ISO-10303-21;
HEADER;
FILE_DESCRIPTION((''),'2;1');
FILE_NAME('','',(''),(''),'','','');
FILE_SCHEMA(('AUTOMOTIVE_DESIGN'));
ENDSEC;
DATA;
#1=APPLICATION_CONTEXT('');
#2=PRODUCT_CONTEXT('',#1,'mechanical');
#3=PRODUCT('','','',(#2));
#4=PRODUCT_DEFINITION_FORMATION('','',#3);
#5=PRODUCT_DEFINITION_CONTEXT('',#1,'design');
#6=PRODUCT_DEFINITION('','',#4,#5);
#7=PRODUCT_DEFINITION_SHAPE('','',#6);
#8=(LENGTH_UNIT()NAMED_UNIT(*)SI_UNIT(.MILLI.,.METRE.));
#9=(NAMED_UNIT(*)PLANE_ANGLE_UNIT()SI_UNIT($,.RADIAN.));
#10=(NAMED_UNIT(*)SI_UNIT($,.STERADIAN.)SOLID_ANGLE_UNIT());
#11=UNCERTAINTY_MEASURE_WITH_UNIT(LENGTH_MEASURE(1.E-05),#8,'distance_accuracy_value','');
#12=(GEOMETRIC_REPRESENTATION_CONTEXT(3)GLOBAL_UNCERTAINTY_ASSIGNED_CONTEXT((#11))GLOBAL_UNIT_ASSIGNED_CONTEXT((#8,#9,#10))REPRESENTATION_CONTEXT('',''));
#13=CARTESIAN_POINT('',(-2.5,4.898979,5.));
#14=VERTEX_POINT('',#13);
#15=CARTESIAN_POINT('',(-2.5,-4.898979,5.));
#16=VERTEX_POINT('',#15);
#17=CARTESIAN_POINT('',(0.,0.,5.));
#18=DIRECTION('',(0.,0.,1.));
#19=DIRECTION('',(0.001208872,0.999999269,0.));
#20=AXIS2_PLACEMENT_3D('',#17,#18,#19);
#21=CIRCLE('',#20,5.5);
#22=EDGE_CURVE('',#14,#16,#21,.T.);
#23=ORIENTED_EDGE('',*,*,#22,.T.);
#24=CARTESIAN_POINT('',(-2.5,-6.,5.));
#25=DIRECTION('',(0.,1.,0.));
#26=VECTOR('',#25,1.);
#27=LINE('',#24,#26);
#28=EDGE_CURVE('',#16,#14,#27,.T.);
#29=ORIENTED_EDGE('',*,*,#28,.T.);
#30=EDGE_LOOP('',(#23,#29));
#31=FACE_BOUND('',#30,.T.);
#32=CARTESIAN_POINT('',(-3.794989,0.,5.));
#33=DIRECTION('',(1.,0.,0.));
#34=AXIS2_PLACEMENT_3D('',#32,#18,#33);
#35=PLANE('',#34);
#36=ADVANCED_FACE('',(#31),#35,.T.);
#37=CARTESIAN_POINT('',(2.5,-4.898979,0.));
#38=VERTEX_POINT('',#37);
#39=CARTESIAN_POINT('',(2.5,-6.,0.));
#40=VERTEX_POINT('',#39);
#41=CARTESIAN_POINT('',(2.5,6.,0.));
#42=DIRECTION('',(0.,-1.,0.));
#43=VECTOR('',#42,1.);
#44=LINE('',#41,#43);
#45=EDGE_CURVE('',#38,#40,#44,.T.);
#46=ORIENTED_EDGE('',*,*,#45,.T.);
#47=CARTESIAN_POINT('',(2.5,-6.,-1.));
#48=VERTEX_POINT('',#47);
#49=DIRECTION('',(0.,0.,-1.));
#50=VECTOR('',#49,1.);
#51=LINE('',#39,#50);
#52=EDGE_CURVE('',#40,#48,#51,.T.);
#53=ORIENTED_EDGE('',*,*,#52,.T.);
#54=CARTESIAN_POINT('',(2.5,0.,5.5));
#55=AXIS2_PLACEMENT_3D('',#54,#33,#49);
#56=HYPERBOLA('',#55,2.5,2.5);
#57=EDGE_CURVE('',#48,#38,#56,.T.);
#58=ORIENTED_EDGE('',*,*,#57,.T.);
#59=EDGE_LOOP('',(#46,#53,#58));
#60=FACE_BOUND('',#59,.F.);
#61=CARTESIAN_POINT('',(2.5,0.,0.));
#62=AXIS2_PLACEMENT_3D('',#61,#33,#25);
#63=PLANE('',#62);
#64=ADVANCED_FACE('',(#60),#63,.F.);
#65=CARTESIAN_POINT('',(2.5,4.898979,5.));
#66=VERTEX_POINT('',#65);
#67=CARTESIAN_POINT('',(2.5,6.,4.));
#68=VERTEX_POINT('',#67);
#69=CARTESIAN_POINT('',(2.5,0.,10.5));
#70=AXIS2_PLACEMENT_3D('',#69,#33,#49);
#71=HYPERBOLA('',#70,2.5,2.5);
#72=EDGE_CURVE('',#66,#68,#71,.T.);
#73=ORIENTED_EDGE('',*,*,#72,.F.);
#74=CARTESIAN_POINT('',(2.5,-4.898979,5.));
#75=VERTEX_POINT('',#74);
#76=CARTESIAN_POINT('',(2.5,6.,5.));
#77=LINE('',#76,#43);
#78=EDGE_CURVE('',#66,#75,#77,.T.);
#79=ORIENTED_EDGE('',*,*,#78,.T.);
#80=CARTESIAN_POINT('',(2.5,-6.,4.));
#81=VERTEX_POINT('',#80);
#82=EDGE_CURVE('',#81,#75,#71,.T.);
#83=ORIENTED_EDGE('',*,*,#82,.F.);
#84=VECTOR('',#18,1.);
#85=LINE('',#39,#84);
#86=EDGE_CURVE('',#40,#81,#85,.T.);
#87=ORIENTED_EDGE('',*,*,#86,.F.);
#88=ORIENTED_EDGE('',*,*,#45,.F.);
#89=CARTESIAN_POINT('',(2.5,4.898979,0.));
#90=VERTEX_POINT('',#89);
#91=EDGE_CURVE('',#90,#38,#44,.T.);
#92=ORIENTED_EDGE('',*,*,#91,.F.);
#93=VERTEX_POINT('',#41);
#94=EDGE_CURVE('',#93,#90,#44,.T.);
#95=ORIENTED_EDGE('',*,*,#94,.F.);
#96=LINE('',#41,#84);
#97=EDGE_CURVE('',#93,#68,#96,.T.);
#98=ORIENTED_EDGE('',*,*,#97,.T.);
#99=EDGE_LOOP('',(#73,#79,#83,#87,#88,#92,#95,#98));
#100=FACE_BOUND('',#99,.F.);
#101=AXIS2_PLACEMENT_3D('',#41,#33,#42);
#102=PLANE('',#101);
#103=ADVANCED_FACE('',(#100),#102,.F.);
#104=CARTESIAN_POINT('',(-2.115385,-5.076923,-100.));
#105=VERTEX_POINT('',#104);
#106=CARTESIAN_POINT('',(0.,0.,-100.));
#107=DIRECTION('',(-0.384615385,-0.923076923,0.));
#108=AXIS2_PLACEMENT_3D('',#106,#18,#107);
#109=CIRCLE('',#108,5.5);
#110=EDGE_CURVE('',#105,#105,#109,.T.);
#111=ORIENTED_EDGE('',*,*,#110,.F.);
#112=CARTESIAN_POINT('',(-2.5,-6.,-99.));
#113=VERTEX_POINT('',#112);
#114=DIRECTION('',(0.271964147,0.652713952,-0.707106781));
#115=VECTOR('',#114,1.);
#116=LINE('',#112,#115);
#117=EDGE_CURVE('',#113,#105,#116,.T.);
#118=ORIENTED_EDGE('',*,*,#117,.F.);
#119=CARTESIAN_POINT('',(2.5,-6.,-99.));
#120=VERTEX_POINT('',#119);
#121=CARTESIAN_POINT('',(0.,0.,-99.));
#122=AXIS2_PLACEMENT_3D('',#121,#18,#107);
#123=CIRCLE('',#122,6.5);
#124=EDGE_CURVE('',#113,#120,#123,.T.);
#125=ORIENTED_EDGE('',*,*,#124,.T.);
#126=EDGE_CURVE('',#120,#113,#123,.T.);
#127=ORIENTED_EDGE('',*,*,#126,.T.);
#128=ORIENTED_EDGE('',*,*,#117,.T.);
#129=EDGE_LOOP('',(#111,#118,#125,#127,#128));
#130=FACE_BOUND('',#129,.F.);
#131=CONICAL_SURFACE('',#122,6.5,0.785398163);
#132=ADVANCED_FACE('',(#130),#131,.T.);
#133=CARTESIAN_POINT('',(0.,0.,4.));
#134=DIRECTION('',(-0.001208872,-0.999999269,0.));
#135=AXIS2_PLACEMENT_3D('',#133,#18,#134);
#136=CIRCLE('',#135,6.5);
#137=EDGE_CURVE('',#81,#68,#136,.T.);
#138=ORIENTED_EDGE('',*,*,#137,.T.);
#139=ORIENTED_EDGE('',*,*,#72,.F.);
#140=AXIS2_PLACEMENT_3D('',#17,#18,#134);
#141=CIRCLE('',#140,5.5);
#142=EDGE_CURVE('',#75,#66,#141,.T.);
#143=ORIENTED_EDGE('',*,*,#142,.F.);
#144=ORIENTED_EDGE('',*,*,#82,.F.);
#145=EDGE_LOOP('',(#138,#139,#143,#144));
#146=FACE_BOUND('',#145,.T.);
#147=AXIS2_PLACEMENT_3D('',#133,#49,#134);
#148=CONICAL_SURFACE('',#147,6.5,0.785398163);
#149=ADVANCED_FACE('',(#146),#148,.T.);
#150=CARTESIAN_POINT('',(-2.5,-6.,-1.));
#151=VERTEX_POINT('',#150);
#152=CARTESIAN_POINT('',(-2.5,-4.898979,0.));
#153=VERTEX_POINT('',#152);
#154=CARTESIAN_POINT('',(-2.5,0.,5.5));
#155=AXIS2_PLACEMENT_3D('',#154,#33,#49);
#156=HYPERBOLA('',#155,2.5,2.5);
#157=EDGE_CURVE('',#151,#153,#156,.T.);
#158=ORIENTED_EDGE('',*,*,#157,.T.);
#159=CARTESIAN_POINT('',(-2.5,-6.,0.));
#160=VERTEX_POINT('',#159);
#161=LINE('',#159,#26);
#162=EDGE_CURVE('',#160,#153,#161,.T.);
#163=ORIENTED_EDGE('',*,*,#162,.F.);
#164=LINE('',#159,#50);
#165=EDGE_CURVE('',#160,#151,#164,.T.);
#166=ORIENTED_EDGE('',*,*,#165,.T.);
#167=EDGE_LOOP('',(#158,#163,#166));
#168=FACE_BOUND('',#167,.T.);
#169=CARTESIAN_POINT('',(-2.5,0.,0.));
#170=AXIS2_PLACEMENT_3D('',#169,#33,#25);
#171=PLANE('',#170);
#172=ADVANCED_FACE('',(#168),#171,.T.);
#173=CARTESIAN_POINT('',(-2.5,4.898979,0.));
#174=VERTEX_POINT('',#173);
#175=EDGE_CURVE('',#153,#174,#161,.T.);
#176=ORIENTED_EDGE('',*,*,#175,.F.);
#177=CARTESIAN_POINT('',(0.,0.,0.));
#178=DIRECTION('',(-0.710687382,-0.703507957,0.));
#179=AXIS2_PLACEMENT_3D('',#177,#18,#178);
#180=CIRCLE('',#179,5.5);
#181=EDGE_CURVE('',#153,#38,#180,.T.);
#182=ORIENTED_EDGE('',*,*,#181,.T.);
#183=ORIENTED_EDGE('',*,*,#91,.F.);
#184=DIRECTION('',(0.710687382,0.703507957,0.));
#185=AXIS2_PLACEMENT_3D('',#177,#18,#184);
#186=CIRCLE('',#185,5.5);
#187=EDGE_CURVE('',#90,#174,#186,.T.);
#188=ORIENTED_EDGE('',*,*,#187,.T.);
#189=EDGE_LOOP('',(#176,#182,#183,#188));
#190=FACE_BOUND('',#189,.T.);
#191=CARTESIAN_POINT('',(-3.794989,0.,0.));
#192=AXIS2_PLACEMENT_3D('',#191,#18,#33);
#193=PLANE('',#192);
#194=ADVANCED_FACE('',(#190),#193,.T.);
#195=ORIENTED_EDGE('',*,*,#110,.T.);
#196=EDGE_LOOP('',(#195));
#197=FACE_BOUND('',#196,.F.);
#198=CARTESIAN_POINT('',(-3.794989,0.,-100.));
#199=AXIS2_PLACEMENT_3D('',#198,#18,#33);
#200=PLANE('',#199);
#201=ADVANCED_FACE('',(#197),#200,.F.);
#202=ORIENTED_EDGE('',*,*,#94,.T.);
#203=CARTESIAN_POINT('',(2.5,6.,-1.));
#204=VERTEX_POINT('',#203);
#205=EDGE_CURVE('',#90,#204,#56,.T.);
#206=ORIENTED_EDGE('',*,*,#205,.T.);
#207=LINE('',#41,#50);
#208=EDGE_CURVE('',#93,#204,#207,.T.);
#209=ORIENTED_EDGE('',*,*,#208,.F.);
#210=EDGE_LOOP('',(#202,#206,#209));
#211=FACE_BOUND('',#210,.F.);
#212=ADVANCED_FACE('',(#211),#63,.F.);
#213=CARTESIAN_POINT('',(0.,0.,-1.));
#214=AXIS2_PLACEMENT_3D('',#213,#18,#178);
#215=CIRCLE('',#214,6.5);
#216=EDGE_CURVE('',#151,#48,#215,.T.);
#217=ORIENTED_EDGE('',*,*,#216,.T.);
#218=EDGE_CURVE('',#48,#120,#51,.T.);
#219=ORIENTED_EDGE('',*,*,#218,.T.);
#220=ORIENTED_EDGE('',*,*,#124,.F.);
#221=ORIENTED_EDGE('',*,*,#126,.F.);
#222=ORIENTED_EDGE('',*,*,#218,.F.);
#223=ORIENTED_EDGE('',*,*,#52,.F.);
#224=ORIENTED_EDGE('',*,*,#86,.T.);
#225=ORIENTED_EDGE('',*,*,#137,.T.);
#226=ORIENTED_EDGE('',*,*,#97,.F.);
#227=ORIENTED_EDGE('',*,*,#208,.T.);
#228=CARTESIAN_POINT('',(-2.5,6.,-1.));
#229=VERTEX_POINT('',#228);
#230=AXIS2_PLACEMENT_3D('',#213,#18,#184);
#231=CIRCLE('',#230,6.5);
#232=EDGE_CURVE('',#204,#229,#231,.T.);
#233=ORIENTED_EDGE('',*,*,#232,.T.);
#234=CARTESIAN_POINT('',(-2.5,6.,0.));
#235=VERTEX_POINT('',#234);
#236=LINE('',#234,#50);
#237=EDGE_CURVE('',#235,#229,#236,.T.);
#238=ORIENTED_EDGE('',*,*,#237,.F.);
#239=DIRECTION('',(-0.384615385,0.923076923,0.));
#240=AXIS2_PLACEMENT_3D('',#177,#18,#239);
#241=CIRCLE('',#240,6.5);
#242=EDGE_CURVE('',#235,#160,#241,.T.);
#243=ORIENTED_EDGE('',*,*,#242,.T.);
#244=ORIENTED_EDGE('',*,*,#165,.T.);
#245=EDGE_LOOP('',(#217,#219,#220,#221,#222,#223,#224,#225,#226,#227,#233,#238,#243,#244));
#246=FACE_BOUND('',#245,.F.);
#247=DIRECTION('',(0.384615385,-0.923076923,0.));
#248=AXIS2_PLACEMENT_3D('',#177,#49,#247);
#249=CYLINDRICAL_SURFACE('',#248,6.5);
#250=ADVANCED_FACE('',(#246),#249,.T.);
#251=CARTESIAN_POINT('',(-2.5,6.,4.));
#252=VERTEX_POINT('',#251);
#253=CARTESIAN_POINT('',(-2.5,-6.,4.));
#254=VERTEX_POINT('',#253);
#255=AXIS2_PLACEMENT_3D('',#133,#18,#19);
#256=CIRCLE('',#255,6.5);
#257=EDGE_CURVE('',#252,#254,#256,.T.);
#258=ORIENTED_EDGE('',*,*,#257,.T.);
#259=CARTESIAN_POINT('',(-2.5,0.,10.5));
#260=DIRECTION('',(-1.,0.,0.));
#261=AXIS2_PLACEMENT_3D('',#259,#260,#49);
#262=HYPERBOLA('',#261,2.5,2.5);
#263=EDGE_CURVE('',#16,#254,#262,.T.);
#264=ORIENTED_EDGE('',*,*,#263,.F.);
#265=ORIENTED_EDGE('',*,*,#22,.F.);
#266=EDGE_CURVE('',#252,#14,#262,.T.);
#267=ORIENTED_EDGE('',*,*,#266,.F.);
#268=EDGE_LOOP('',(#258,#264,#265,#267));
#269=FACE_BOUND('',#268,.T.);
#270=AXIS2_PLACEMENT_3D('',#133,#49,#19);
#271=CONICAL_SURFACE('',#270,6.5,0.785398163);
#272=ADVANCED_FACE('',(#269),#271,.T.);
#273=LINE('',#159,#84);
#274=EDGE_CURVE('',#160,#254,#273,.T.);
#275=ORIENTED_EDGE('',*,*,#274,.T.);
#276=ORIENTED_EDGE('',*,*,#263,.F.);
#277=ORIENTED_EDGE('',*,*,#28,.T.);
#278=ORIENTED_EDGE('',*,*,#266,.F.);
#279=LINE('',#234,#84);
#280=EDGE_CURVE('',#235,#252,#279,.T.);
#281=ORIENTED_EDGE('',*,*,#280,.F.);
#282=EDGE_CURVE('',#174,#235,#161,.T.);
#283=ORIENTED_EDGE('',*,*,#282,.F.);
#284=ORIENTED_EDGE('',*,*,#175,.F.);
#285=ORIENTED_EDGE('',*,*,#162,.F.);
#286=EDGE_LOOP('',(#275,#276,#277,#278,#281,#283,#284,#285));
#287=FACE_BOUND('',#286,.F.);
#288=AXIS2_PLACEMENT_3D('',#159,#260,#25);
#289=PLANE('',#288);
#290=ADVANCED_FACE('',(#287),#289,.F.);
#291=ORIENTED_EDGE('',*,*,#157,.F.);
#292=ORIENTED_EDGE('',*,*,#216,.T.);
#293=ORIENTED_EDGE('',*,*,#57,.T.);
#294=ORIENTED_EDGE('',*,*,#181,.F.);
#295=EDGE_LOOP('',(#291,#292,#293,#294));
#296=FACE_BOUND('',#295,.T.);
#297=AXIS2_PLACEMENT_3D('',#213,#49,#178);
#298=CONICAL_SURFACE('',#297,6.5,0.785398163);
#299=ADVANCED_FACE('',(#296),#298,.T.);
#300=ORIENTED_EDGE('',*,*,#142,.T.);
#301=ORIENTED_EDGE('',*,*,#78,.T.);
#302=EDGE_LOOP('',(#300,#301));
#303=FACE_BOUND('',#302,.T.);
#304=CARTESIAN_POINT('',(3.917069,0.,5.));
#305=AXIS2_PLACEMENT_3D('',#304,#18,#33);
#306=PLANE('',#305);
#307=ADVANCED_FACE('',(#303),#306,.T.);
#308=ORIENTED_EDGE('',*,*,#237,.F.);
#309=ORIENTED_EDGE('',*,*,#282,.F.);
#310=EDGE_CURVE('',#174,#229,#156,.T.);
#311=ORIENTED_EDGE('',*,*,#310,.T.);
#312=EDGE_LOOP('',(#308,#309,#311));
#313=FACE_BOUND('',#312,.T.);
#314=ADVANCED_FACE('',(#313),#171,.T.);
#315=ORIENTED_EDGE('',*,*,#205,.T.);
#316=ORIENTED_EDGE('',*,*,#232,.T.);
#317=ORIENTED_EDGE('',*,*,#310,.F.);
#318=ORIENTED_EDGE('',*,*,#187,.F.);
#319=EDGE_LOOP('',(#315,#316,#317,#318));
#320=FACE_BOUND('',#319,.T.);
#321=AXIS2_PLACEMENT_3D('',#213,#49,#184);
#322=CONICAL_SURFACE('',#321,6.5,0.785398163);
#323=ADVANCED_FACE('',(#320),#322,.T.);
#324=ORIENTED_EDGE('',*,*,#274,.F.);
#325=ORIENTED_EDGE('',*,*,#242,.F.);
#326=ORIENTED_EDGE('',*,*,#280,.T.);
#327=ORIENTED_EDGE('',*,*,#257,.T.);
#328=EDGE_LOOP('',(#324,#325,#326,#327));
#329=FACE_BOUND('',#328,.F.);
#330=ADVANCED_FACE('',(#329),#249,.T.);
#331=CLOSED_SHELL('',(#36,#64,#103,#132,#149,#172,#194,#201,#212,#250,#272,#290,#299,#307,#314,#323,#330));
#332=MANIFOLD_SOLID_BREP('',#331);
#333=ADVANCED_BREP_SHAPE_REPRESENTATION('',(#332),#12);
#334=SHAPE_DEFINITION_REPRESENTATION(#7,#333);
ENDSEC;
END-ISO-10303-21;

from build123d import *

# Parameters (mm, degrees)
F1_DEPTH     = 100
F2_DEPTH     = 5
F3_T2_ANGLE  = 180.1385265573
F3_T4_ANGLE  = 180.1385265573
F3_T10_ANGLE = 90.5817403508
F3_T16_ANGLE = 90.5817403508


# Not quite as in the source:
# - a fillet or chamfer that OpenCascade refuses, or shapes differently, is made with other operations: its cross-section is extruded or revolved along the edge and cut away or added


with BuildPart() as f1:
    # F0 (on Top) → F1 (new body)
    with BuildSketch(Plane.XY):
        with BuildLine():
            Line((-2.5, -6), (-2.5, 6))
            ThreePointArc((-2.5, 6), (-6.5, 0), (-2.5, -6))
        make_face()
        with BuildLine():
            ThreePointArc((2.5, -6), (5.4083269132, -3.6055512755), (6.5, 0))
            ThreePointArc((6.5, 0), (5.4083269132, 3.6055512755), (2.5, 6))
            Line((2.5, 6), (2.5, -6))
        make_face()
        with BuildLine():
            Line((2.5, -6), (2.5, 6))
            ThreePointArc((2.5, 6), (0, 6.5), (-2.5, 6))
            Line((-2.5, 6), (-2.5, -6))
            ThreePointArc((-2.5, -6), (0, -6.5), (2.5, -6))
        make_face()
    extrude(amount=-F1_DEPTH)

    # F0 (on Top) → F2 (join)
    with BuildSketch(Plane.XY):
        with BuildLine():
            Line((-2.5, -6), (-2.5, 6))
            ThreePointArc((-2.5, 6), (-6.5, 0), (-2.5, -6))
        make_face()
        with BuildLine():
            ThreePointArc((2.5, -6), (5.4083269132, -3.6055512755), (6.5, 0))
            ThreePointArc((6.5, 0), (5.4083269132, 3.6055512755), (2.5, 6))
            Line((2.5, 6), (2.5, -6))
        make_face()
    extrude(amount=F2_DEPTH)

    # F3: chamfer of 1 on 7 edges, made by hand

    # F3_s1 → F3_t2 (revolve, cut)
    with BuildSketch(Plane(origin=(0, 0, 0), x_dir=(0, 0, 1), z_dir=(0.9999992693, -0.001208872, 0))):
        Polygon((4, -6.5), (5, -5.5), (5, -6.5), align=None)
    revolve(axis=Axis((0, 0, 5), (0, 0, 1)), revolution_arc=F3_T2_ANGLE, mode=Mode.SUBTRACT)

    # F3_s3 → F3_t4 (revolve, cut)
    with BuildSketch(Plane(origin=(0, 0, 0), x_dir=(0, 0, 1), z_dir=(-0.9999992693, 0.001208872, 0))):
        Polygon((4, -6.5), (5, -5.5), (5, -6.5), align=None)
    revolve(axis=Axis((0, 0, 5), (0, 0, 1)), revolution_arc=F3_T4_ANGLE, mode=Mode.SUBTRACT)

    # F3_s5 → F3_t6 (revolve, cut)
    with BuildSketch(Plane(origin=(0, 0, 0), x_dir=(0, 0, 1), z_dir=(-0.9230769231, 0.3846153846, 0))):
        Polygon((-99, -6.5), (-100, -5.5), (-100, -6.5), align=None)
    revolve(axis=Axis((0, 0, -100), (0, 0, 1)), mode=Mode.SUBTRACT)


with BuildPart() as f3_tool8:
    # F3_s9 → F3_t10 (revolve)
    with BuildSketch(Plane(origin=(0, 0, 0), x_dir=(0, 0, 1), z_dir=(-0.7035079566, 0.7106873821, 0))):
        Polygon((-1, -6.5), (0, -5.5), (0, -6.5), align=None)
    revolve(axis=Axis((0, 0, 0), (0, 0, 1)), revolution_arc=F3_T10_ANGLE)

    split(bisect_by=Plane.YZ.offset(-2.5), keep=Keep.TOP)

    split(bisect_by=Plane.YZ.offset(2.5), keep=Keep.BOTTOM)


with BuildPart() as f1_1:
    add(f1.part)

    # F3_t7: cut F3_tool8
    add(f3_tool8.part, mode=Mode.SUBTRACT)


with BuildPart() as f3_tool14:
    # F3_s15 → F3_t16 (revolve)
    with BuildSketch(Plane(origin=(0, 0, 0), x_dir=(0, 0, 1), z_dir=(0.7035079566, -0.7106873821, 0))):
        Polygon((-1, -6.5), (0, -5.5), (0, -6.5), align=None)
    revolve(axis=Axis((0, 0, 0), (0, 0, 1)), revolution_arc=F3_T16_ANGLE)

    split(bisect_by=Plane.YZ.offset(-2.5), keep=Keep.TOP)

    split(bisect_by=Plane.YZ.offset(2.5), keep=Keep.BOTTOM)


with BuildPart() as f1_2:
    add(f1_1.part)

    # F3_t13: cut F3_tool14
    add(f3_tool14.part, mode=Mode.SUBTRACT)


solid = f1_2.part
